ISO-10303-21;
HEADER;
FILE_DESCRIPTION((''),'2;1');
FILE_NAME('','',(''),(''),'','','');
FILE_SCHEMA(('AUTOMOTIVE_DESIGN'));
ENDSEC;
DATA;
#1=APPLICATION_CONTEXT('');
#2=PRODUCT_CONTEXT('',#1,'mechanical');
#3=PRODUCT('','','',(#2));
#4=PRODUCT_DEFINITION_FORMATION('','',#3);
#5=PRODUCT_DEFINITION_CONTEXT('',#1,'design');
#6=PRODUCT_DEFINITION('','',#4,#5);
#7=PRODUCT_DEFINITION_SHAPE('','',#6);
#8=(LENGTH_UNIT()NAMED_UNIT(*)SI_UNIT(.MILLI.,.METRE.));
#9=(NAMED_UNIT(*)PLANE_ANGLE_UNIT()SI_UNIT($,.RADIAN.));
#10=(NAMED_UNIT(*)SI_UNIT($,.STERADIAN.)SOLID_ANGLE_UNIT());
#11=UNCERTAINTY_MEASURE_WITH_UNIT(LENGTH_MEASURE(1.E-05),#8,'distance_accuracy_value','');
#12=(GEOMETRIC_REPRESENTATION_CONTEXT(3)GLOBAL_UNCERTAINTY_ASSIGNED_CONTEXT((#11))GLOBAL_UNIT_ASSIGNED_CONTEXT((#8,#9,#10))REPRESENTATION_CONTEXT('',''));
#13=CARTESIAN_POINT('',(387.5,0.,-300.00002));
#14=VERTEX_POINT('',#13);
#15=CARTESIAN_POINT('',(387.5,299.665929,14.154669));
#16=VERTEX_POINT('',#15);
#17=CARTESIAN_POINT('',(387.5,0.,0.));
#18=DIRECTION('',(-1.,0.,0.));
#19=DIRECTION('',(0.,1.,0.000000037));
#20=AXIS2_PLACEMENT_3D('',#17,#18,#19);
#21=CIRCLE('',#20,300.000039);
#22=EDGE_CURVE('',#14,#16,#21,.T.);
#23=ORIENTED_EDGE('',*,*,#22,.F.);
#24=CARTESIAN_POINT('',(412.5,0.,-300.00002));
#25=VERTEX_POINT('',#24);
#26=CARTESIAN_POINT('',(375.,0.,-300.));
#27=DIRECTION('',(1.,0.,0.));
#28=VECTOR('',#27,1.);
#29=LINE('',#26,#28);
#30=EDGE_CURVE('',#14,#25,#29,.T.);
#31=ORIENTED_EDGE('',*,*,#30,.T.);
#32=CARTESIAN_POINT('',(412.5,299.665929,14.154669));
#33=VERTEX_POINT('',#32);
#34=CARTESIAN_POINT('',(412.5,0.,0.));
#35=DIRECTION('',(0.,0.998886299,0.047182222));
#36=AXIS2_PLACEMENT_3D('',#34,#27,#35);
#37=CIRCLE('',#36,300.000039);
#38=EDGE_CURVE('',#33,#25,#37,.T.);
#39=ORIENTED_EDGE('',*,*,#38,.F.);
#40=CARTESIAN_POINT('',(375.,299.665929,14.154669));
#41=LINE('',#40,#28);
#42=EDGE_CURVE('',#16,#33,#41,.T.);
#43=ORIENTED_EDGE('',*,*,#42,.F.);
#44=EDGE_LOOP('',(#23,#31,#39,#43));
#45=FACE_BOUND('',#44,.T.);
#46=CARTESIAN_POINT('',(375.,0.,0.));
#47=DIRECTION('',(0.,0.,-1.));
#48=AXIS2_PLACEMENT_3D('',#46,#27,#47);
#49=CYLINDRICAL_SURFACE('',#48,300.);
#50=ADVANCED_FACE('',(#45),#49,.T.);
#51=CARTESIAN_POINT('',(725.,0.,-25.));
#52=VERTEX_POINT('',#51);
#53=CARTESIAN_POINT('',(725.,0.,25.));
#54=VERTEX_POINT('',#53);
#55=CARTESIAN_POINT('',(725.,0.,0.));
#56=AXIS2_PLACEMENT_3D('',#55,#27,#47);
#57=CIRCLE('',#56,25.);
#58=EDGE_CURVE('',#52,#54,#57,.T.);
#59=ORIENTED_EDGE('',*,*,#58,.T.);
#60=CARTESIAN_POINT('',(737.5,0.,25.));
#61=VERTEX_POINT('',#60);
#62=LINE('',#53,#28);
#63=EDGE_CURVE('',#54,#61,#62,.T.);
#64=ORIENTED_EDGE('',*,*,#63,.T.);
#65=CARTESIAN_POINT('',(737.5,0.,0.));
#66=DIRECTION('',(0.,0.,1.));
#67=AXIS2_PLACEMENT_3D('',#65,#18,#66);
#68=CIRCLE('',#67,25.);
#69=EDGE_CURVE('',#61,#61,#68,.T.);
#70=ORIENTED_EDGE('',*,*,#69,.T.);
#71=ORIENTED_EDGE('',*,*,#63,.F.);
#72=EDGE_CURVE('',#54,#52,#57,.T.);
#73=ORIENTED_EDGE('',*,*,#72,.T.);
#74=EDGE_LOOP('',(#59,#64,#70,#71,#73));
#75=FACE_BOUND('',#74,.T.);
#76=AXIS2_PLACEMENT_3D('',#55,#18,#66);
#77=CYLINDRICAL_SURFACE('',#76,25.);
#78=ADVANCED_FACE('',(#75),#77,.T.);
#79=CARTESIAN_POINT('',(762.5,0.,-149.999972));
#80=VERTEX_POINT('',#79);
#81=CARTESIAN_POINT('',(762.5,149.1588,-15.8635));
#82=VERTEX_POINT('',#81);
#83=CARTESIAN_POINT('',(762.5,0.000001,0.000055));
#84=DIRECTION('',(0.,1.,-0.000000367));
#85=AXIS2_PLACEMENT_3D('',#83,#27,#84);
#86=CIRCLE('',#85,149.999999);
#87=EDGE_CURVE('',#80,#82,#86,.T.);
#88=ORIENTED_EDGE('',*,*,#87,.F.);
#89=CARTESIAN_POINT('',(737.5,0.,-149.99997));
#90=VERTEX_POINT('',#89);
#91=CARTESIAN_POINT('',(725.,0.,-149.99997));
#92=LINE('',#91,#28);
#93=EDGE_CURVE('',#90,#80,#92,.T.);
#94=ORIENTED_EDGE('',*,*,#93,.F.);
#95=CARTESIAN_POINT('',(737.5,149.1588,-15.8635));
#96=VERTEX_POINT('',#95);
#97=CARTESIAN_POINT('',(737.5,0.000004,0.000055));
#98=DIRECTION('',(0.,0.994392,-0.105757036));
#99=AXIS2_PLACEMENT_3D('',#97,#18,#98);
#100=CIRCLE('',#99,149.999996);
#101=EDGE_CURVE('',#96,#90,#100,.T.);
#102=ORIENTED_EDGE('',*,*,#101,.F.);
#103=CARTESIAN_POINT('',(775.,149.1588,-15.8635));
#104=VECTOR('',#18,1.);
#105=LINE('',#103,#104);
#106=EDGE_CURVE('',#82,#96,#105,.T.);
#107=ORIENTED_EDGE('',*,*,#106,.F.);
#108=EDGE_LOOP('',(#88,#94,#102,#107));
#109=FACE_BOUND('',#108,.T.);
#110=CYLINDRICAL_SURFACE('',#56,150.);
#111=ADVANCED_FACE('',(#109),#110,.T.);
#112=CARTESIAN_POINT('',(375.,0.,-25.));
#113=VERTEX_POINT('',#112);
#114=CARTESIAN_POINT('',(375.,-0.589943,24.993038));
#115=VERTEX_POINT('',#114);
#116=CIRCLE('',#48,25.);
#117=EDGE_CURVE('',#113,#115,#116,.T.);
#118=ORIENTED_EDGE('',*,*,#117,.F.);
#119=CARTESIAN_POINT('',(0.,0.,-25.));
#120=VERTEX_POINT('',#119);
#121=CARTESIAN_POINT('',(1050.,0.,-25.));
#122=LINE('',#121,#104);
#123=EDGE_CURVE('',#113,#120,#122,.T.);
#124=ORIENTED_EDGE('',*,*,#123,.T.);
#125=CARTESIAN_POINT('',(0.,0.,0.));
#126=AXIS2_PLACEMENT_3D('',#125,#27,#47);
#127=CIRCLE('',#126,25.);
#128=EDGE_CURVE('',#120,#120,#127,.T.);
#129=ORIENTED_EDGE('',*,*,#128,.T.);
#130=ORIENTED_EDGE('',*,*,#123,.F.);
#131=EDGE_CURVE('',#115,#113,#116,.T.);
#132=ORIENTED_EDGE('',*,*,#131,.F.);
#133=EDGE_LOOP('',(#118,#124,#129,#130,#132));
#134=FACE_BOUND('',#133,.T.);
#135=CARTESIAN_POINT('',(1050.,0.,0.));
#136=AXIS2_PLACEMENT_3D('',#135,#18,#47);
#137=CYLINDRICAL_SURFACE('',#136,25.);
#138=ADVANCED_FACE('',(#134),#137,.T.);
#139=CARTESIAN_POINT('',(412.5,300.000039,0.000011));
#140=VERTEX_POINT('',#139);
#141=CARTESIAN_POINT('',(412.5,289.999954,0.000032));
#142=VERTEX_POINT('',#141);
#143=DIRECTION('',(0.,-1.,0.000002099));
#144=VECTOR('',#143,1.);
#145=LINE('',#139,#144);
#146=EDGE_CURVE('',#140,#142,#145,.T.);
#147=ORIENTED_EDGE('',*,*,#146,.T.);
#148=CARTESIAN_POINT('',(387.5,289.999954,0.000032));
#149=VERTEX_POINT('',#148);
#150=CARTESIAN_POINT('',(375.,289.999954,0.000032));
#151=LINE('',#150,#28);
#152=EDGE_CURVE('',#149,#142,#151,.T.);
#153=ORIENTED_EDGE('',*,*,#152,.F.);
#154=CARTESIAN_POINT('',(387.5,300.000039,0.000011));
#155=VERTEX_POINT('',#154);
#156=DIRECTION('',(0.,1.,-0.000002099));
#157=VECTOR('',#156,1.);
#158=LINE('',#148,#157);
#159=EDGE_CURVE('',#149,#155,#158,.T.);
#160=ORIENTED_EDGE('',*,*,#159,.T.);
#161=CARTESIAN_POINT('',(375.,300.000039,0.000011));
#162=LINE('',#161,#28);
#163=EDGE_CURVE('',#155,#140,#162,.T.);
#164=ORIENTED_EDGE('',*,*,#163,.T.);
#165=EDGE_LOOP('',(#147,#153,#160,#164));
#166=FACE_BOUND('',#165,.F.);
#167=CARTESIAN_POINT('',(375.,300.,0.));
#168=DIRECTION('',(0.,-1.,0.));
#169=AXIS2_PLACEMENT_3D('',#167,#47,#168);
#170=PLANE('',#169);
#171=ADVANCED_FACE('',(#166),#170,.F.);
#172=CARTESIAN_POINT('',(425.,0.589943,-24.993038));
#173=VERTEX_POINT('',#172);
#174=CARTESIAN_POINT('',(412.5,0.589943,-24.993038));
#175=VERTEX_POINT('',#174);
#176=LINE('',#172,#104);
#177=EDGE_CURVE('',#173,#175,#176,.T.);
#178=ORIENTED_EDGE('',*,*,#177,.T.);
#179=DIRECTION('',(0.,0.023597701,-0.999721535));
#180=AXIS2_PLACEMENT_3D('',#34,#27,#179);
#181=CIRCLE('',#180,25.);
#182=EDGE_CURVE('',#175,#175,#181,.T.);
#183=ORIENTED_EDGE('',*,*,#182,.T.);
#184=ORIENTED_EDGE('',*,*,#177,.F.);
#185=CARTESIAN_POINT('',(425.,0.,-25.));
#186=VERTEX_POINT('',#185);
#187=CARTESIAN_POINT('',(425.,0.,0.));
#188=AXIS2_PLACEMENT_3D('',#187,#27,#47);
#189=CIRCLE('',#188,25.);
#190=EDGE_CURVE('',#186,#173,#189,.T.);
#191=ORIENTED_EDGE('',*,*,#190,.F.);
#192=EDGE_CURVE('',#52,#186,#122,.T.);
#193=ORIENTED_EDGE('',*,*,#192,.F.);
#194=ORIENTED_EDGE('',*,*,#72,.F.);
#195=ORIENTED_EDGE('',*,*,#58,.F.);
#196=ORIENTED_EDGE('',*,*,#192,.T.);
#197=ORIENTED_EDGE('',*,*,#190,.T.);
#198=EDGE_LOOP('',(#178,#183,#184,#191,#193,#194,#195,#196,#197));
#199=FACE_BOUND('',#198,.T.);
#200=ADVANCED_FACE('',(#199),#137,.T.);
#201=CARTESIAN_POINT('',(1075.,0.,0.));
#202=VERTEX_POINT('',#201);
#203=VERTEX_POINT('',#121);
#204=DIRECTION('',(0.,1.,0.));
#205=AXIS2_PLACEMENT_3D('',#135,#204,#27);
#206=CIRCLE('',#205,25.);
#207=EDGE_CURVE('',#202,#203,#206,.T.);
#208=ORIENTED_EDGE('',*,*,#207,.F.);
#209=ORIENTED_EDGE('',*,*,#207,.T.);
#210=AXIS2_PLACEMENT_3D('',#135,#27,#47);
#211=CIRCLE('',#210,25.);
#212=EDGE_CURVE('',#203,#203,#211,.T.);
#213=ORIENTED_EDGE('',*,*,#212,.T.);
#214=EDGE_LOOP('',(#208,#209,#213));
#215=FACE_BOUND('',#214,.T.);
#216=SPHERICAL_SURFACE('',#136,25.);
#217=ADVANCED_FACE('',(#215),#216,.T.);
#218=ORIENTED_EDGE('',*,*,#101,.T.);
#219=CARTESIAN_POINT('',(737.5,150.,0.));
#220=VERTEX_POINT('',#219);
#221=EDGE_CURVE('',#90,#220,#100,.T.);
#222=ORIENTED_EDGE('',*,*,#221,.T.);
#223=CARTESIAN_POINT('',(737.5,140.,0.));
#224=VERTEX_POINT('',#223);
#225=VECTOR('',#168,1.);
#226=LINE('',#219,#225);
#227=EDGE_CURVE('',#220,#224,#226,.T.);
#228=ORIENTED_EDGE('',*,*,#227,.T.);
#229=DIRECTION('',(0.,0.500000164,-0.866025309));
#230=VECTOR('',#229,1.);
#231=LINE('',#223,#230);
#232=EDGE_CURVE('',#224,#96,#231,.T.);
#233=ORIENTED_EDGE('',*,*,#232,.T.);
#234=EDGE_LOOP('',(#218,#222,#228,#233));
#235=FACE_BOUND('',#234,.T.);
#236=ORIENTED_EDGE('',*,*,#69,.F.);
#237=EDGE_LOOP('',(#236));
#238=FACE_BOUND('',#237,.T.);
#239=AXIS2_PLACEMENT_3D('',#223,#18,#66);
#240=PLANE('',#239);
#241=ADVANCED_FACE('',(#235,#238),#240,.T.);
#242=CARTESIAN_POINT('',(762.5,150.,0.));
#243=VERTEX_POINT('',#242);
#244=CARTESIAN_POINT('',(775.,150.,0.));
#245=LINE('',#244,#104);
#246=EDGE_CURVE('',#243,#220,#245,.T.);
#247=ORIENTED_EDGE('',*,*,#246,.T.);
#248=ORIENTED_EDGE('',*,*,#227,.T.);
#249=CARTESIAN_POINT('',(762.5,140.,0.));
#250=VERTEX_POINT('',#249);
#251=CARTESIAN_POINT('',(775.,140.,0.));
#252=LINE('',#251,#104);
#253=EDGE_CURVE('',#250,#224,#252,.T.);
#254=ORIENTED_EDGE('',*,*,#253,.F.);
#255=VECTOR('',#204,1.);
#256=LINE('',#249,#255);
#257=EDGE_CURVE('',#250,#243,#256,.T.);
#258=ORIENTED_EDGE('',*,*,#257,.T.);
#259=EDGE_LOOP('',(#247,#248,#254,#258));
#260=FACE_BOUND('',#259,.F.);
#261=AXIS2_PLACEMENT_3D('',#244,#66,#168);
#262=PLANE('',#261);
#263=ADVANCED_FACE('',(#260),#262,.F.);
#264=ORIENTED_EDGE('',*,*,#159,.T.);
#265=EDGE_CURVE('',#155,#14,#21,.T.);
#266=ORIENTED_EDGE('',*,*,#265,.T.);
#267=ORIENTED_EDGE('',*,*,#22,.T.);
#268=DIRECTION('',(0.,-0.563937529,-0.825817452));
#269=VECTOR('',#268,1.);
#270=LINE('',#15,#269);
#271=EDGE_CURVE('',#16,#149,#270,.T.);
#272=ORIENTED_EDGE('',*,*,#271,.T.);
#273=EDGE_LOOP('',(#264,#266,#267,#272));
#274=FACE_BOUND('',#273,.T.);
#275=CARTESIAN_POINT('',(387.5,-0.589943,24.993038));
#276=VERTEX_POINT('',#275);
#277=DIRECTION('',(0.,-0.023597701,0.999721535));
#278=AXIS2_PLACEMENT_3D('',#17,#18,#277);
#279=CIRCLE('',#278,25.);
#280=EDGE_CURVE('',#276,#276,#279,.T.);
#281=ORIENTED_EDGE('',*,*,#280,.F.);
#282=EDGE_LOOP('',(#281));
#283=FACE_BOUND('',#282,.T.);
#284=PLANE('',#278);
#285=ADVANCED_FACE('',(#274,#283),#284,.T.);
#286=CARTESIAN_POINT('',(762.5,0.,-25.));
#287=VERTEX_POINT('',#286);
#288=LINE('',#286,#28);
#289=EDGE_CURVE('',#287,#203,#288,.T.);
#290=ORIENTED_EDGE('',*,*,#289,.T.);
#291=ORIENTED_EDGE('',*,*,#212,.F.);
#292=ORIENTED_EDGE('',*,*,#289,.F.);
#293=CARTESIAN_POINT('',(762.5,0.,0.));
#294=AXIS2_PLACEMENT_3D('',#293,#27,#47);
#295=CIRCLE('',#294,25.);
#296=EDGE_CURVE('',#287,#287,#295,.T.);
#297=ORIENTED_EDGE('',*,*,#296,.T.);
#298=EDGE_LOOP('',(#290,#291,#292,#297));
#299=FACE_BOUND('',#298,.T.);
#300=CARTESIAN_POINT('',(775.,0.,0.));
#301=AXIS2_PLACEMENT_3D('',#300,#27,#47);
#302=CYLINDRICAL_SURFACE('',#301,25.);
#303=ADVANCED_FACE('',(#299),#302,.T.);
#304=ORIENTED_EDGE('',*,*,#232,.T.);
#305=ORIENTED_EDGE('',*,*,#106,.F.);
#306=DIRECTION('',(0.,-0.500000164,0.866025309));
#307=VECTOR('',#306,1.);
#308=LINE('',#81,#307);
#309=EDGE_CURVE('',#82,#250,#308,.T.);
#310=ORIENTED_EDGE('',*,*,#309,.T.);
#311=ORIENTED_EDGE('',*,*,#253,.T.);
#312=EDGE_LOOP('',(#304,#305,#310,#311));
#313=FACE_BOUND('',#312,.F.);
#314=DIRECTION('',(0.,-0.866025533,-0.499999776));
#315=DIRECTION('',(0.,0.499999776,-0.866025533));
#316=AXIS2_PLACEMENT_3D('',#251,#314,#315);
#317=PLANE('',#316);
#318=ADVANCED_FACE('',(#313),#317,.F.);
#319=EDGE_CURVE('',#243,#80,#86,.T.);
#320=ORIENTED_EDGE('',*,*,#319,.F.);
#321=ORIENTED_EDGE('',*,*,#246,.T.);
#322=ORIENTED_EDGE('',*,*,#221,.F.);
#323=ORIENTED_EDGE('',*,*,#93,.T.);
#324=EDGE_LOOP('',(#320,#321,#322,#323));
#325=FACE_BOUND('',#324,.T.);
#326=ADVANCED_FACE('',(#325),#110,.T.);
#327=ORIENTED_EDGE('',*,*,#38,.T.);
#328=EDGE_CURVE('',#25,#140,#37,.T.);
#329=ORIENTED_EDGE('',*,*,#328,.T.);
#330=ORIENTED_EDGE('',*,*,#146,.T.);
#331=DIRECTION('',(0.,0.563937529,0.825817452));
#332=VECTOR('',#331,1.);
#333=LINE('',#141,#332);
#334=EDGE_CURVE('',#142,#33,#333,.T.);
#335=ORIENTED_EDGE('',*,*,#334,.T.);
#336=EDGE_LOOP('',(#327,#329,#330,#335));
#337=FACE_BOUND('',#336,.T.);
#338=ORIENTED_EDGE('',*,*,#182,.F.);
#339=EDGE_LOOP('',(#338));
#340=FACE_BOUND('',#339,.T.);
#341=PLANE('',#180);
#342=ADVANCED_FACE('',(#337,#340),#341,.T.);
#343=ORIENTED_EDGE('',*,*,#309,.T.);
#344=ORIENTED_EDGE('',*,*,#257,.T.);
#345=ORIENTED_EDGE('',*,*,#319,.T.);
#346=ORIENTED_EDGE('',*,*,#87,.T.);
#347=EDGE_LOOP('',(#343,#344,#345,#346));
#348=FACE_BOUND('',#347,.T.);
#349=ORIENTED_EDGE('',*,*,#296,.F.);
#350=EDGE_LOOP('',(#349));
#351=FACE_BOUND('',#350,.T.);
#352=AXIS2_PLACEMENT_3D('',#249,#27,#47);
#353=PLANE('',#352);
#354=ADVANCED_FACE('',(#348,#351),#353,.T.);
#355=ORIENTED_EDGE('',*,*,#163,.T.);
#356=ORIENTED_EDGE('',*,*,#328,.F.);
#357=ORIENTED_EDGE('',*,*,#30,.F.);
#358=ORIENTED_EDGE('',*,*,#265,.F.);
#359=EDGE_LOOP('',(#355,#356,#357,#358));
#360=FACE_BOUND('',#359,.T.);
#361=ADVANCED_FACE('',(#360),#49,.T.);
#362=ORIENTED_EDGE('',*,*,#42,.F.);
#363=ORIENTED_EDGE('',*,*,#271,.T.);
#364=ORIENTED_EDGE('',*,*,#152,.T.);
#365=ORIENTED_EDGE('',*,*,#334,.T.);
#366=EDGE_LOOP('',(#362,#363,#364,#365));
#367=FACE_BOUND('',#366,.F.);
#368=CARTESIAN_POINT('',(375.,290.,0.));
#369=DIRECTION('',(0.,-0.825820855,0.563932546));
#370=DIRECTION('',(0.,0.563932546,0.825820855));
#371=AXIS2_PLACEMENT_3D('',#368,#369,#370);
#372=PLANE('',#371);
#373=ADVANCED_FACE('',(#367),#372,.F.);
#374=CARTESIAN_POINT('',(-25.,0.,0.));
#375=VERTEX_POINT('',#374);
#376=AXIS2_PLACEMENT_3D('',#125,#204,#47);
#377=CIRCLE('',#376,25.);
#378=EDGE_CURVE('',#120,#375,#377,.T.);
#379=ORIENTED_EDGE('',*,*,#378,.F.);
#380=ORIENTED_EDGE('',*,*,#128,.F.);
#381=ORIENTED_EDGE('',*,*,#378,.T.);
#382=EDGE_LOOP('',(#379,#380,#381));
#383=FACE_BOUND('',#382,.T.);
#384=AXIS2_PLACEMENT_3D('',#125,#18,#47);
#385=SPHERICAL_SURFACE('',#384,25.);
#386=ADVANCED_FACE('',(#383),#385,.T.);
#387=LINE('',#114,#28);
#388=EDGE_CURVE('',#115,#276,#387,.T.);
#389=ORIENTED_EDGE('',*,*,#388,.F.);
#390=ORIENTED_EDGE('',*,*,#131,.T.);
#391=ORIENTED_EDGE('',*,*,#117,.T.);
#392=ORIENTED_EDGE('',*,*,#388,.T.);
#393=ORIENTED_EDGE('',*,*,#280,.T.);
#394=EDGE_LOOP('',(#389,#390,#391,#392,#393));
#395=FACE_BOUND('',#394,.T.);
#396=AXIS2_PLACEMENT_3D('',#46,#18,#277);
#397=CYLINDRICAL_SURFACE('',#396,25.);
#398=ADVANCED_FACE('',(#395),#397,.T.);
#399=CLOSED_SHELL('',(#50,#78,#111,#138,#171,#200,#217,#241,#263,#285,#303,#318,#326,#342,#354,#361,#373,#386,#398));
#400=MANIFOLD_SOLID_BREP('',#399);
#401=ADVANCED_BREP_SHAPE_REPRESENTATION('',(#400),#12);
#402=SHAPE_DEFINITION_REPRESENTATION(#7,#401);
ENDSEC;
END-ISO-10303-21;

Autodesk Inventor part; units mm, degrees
ref_plane "YZ Plane" through (0, 0, 0) normal (1, 0, 0) x (0, 1, 0)
ref_plane "XZ Plane" through (0, 0, 0) normal (0, 1, 0) x (-1, 0, 0)
ref_plane "XY Plane" through (0, 0, 0) normal (0, 0, 1) x (1, 0, 0)
sketch "Sketch1" plane through (0, 0, 0) normal (0, 1, 0) x (-1, 0, 0)
  line L0 (0, 0) -> (-400, 0) construction
  line L1 (-400, 0) -> (-750, 0)
  line L2 (-750, 0) -> (-1050, 0)
  line L3 (-400, 0) -> (-400, -300) construction
  line L4 (-400, -300) -> (-375, -300) construction
  line L5 (-375, -300) -> (-425, -300)
  line L6 (-425, -300) -> (-425, 0)
  line L7 (-425, 0) -> (-375, 0)
  line L8 (-375, 0) -> (-375, -300)
  line L9 (0, 0) -> (-1050, 0)
  line L10 (-1050, 0) -> (-1050, -25)
  line L11 (-1050, -25) -> (0, -25)
  line L12 (0, -25) -> (0, 0)
  arc A0 (0, -25) -> (25, 0) centre (0, 0) ccw
  line L13 (0, 0) -> (25, 0) construction
  line L14 (-750, 0) -> (-750, -150) construction
  line L15 (-750, -150) -> (-725, -150) construction
  line L16 (-725, -150) -> (-775, -150)
  line L17 (-775, -150) -> (-775, 0)
  line L18 (-775, 0) -> (-725, 0)
  line L19 (-725, 0) -> (-725, -150)
  arc A1 (-1075, 0) -> (-1050, -25) centre (-1050, 0) ccw
  line L20 (-1050, 0) -> (-1075, 0)
  line L21 (25, 0) -> (0, 0)
  point P0 (-775, -25)
  point P1 (-725, -25)
  point P2 (-425, -25)
  point P3 (-375, -25)
  dimension "d0" = 400
  dimension "d1" = 350
  dimension "d2" = 300
  dimension "d3" = 300
  dimension "d4" = 25
  dimension "d5" = 50
  dimension "d6" = 1050
  dimension "d7" = 25
  dimension "d8" = 150
  dimension "d9" = 25
  dimension "d10" = 50
revolve "Revolution1" add sketch "Sketch1" angle 360 about axis through (0, 0, 0) along (1, 0, 0)
sketch "Sketch2" plane through (375, 0, 0) normal (-1, 0, 0) x (0, 0, 1)
  circle A0 centre (0, 0) radius 300 projected
  line L0 (0, 300) -> (0, 290)
  line L1 (0, 290) -> (25.5833, 307.4702)
  point P0 (14.1547, 299.6659)
  dimension "d12" = 10
extrude "Extrusion1" cut sketch "Sketch2" against normal blind 284.25 contours A0 L1 L0 picked at (7.8644, 296.5058)
sketch "Sketch3" plane through (775, 0, 0) normal (1, 0, 0) x (0, 0, -1)
  circle A0 centre (0, 0) radius 150 projected
  line L0 (0, 150) -> (0, 140)
  line L1 (0, 140) -> (62.4254, 176.0413)
  point P0 (15.8635, 149.1588)
  dimension "d15" = 10
  dimension "d16" = 60
extrude "Extrusion2" cut sketch "Sketch3" against normal blind 139 contours A0 L1 L0 picked at (8.8167, 146.2616)
sketch "Sketch4" plane through (375, 0, 0) normal (-1, 0, 0) x (0, -0.0235977, 0.9997215)
  line L0 (7.0793, 299.9165) -> (-6.8433, 289.9192) projected
  line L1 (-6.8433, 289.9192) -> (-7.0793, 299.9165) projected
  arc A0 (-7.0793, 299.9165) -> (7.0793, 299.9165) centre (0, 0) ccw projected
  circle A1 centre (0, 0) radius 25 projected
sketch "Sketch5" plane through (425, 0, 0) normal (1, 0, 0) x (0, 0.0235977, -0.9997215)
  line L0 (6.8433, 289.9192) -> (-7.0793, 299.9165) projected
  arc A0 (-7.0793, 299.9165) -> (7.0793, 299.9165) centre (0, 0) ccw projected
  line L1 (7.0793, 299.9165) -> (6.8433, 289.9192) projected
  circle A1 centre (0, 0) radius 25 projected
sketch "Sketch6" plane through (725, 140, 0) normal (-1, 0, 0) x (0, 0, 1)
  line L0 (0, 0) -> (-15.8635, 9.1588) projected
  arc A0 (-15.8635, 9.1588) -> (0, 10) centre (0, -140) ccw projected
  line L1 (0, 10) -> (0, 0) projected
  circle A1 centre (0, -140) radius 25 projected
sketch "Sketch7" plane through (775, 140, 0) normal (1, 0, 0) x (0, 0, -1)
  circle A0 centre (0, -140) radius 25 projected
  line L0 (15.8635, 9.1588) -> (0, 0) projected
  line L1 (0, 0) -> (0, 10) projected
  arc A1 (0, 10) -> (15.8635, 9.1588) centre (0, -140) ccw projected
extrude "Extrusion3" cut sketch "Sketch5" against normal blind 12.5
extrude "Extrusion4" cut sketch "Sketch7" against normal blind 12.5
extrude "Extrusion5" cut sketch "Sketch6" against normal blind 12.5
extrude "Extrusion6" cut sketch "Sketch4" against normal blind 12.5
properties part number "shaft_model_2.5cm" material "Steel"
